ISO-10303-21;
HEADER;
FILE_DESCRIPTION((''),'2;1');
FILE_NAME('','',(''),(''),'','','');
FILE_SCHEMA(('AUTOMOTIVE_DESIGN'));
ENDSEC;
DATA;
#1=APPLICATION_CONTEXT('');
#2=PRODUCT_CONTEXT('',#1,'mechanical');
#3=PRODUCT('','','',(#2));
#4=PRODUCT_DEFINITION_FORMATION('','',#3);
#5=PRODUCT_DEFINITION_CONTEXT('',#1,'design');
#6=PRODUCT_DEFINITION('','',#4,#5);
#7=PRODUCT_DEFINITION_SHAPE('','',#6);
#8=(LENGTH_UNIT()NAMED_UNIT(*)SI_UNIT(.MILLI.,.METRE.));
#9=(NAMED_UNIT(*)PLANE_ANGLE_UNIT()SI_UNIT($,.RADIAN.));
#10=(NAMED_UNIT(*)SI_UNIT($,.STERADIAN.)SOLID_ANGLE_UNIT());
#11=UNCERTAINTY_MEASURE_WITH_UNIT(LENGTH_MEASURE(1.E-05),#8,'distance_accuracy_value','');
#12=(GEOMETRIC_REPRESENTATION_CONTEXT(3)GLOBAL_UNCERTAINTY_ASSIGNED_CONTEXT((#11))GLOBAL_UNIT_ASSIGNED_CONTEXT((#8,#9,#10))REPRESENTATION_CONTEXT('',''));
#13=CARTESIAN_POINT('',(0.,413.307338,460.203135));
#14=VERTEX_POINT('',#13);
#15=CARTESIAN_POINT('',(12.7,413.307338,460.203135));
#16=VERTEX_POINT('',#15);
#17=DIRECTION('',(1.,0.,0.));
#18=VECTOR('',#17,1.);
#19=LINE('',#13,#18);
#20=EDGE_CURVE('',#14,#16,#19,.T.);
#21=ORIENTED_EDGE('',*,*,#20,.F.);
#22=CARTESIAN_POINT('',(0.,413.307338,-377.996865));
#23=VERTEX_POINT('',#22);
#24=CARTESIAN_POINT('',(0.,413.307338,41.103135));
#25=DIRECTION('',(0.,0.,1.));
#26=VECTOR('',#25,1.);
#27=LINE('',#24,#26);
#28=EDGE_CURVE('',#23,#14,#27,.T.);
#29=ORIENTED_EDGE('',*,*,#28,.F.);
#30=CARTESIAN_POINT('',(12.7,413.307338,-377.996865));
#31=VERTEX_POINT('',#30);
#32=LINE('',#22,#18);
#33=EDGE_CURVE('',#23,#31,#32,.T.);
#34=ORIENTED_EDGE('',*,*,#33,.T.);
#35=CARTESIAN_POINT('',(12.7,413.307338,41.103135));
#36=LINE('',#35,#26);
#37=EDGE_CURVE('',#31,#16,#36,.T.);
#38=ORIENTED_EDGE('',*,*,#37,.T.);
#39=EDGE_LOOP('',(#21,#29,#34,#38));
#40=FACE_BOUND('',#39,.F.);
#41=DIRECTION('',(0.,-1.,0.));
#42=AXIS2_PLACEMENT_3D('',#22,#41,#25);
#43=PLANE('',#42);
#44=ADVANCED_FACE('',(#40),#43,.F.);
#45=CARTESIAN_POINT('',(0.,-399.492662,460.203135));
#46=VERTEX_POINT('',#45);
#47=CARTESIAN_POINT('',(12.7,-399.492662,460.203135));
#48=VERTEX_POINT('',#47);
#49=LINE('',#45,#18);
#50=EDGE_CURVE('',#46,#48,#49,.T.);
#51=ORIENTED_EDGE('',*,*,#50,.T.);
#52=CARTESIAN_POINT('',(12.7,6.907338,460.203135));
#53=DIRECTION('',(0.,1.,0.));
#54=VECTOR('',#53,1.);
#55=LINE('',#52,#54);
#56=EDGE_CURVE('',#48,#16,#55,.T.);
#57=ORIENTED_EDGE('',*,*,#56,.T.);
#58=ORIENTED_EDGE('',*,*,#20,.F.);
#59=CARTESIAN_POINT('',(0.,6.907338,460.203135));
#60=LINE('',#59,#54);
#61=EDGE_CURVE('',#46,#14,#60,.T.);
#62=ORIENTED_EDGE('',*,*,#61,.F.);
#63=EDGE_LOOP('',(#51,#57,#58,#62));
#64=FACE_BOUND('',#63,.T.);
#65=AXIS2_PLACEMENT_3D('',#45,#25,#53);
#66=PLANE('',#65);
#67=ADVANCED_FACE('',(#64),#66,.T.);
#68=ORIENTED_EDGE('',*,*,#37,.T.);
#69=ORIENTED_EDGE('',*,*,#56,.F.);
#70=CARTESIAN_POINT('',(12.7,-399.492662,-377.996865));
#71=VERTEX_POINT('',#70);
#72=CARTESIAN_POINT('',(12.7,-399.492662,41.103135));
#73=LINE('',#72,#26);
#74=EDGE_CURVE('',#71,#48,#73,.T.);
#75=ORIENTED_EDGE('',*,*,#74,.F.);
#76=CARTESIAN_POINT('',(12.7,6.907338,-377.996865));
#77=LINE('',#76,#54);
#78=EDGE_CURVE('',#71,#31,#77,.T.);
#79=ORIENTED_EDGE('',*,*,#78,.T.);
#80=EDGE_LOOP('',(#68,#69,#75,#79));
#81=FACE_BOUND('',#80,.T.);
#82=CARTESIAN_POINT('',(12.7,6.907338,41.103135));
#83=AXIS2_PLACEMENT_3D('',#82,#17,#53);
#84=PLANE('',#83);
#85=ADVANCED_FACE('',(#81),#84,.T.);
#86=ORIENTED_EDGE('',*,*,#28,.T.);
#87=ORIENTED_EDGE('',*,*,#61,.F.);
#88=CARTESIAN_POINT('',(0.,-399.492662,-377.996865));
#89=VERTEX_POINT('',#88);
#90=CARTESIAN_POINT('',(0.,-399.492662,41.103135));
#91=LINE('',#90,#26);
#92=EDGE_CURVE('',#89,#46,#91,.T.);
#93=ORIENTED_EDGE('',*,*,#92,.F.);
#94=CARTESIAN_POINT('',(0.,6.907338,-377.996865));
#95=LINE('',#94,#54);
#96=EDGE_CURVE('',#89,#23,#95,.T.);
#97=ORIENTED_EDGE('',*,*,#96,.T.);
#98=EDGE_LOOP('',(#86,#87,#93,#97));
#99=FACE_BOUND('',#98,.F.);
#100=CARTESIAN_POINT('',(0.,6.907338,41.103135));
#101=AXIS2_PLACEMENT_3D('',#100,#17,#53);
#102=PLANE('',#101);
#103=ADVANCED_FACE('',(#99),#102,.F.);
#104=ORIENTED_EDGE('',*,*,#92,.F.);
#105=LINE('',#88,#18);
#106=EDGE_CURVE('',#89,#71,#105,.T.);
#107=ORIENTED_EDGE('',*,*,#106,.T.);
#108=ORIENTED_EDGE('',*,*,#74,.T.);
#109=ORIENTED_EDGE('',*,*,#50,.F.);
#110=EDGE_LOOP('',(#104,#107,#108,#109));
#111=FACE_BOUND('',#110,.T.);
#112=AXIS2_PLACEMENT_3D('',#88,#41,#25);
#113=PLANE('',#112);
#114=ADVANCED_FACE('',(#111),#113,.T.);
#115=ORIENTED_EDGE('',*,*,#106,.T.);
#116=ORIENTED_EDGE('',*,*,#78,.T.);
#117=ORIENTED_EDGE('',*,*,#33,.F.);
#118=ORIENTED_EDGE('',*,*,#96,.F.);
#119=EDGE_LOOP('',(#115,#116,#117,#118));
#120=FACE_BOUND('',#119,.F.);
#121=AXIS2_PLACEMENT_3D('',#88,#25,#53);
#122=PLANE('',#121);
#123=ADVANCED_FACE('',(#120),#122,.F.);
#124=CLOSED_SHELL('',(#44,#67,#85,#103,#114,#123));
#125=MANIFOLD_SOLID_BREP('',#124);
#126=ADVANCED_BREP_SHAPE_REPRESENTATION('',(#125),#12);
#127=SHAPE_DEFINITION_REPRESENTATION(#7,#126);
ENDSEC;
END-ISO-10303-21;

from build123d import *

# Parameters (mm, degrees)
F0_W     = 812.8
F0_H     = 838.2
F1_DEPTH = 12.7


# Not quite as in the source:
# - a length typed as a fraction of an inch, garbled in the dataset ("3 / 203.2 mm" for 3/8 in), is restored


with BuildPart() as f1:
    # F0 (on Right) → F1 (new body)
    with BuildSketch(Plane.YZ):
        with Locations((6.9073382765, 41.1031354467)):
            Rectangle(F0_W, F0_H)
    extrude(amount=F1_DEPTH)


solid = f1.part
